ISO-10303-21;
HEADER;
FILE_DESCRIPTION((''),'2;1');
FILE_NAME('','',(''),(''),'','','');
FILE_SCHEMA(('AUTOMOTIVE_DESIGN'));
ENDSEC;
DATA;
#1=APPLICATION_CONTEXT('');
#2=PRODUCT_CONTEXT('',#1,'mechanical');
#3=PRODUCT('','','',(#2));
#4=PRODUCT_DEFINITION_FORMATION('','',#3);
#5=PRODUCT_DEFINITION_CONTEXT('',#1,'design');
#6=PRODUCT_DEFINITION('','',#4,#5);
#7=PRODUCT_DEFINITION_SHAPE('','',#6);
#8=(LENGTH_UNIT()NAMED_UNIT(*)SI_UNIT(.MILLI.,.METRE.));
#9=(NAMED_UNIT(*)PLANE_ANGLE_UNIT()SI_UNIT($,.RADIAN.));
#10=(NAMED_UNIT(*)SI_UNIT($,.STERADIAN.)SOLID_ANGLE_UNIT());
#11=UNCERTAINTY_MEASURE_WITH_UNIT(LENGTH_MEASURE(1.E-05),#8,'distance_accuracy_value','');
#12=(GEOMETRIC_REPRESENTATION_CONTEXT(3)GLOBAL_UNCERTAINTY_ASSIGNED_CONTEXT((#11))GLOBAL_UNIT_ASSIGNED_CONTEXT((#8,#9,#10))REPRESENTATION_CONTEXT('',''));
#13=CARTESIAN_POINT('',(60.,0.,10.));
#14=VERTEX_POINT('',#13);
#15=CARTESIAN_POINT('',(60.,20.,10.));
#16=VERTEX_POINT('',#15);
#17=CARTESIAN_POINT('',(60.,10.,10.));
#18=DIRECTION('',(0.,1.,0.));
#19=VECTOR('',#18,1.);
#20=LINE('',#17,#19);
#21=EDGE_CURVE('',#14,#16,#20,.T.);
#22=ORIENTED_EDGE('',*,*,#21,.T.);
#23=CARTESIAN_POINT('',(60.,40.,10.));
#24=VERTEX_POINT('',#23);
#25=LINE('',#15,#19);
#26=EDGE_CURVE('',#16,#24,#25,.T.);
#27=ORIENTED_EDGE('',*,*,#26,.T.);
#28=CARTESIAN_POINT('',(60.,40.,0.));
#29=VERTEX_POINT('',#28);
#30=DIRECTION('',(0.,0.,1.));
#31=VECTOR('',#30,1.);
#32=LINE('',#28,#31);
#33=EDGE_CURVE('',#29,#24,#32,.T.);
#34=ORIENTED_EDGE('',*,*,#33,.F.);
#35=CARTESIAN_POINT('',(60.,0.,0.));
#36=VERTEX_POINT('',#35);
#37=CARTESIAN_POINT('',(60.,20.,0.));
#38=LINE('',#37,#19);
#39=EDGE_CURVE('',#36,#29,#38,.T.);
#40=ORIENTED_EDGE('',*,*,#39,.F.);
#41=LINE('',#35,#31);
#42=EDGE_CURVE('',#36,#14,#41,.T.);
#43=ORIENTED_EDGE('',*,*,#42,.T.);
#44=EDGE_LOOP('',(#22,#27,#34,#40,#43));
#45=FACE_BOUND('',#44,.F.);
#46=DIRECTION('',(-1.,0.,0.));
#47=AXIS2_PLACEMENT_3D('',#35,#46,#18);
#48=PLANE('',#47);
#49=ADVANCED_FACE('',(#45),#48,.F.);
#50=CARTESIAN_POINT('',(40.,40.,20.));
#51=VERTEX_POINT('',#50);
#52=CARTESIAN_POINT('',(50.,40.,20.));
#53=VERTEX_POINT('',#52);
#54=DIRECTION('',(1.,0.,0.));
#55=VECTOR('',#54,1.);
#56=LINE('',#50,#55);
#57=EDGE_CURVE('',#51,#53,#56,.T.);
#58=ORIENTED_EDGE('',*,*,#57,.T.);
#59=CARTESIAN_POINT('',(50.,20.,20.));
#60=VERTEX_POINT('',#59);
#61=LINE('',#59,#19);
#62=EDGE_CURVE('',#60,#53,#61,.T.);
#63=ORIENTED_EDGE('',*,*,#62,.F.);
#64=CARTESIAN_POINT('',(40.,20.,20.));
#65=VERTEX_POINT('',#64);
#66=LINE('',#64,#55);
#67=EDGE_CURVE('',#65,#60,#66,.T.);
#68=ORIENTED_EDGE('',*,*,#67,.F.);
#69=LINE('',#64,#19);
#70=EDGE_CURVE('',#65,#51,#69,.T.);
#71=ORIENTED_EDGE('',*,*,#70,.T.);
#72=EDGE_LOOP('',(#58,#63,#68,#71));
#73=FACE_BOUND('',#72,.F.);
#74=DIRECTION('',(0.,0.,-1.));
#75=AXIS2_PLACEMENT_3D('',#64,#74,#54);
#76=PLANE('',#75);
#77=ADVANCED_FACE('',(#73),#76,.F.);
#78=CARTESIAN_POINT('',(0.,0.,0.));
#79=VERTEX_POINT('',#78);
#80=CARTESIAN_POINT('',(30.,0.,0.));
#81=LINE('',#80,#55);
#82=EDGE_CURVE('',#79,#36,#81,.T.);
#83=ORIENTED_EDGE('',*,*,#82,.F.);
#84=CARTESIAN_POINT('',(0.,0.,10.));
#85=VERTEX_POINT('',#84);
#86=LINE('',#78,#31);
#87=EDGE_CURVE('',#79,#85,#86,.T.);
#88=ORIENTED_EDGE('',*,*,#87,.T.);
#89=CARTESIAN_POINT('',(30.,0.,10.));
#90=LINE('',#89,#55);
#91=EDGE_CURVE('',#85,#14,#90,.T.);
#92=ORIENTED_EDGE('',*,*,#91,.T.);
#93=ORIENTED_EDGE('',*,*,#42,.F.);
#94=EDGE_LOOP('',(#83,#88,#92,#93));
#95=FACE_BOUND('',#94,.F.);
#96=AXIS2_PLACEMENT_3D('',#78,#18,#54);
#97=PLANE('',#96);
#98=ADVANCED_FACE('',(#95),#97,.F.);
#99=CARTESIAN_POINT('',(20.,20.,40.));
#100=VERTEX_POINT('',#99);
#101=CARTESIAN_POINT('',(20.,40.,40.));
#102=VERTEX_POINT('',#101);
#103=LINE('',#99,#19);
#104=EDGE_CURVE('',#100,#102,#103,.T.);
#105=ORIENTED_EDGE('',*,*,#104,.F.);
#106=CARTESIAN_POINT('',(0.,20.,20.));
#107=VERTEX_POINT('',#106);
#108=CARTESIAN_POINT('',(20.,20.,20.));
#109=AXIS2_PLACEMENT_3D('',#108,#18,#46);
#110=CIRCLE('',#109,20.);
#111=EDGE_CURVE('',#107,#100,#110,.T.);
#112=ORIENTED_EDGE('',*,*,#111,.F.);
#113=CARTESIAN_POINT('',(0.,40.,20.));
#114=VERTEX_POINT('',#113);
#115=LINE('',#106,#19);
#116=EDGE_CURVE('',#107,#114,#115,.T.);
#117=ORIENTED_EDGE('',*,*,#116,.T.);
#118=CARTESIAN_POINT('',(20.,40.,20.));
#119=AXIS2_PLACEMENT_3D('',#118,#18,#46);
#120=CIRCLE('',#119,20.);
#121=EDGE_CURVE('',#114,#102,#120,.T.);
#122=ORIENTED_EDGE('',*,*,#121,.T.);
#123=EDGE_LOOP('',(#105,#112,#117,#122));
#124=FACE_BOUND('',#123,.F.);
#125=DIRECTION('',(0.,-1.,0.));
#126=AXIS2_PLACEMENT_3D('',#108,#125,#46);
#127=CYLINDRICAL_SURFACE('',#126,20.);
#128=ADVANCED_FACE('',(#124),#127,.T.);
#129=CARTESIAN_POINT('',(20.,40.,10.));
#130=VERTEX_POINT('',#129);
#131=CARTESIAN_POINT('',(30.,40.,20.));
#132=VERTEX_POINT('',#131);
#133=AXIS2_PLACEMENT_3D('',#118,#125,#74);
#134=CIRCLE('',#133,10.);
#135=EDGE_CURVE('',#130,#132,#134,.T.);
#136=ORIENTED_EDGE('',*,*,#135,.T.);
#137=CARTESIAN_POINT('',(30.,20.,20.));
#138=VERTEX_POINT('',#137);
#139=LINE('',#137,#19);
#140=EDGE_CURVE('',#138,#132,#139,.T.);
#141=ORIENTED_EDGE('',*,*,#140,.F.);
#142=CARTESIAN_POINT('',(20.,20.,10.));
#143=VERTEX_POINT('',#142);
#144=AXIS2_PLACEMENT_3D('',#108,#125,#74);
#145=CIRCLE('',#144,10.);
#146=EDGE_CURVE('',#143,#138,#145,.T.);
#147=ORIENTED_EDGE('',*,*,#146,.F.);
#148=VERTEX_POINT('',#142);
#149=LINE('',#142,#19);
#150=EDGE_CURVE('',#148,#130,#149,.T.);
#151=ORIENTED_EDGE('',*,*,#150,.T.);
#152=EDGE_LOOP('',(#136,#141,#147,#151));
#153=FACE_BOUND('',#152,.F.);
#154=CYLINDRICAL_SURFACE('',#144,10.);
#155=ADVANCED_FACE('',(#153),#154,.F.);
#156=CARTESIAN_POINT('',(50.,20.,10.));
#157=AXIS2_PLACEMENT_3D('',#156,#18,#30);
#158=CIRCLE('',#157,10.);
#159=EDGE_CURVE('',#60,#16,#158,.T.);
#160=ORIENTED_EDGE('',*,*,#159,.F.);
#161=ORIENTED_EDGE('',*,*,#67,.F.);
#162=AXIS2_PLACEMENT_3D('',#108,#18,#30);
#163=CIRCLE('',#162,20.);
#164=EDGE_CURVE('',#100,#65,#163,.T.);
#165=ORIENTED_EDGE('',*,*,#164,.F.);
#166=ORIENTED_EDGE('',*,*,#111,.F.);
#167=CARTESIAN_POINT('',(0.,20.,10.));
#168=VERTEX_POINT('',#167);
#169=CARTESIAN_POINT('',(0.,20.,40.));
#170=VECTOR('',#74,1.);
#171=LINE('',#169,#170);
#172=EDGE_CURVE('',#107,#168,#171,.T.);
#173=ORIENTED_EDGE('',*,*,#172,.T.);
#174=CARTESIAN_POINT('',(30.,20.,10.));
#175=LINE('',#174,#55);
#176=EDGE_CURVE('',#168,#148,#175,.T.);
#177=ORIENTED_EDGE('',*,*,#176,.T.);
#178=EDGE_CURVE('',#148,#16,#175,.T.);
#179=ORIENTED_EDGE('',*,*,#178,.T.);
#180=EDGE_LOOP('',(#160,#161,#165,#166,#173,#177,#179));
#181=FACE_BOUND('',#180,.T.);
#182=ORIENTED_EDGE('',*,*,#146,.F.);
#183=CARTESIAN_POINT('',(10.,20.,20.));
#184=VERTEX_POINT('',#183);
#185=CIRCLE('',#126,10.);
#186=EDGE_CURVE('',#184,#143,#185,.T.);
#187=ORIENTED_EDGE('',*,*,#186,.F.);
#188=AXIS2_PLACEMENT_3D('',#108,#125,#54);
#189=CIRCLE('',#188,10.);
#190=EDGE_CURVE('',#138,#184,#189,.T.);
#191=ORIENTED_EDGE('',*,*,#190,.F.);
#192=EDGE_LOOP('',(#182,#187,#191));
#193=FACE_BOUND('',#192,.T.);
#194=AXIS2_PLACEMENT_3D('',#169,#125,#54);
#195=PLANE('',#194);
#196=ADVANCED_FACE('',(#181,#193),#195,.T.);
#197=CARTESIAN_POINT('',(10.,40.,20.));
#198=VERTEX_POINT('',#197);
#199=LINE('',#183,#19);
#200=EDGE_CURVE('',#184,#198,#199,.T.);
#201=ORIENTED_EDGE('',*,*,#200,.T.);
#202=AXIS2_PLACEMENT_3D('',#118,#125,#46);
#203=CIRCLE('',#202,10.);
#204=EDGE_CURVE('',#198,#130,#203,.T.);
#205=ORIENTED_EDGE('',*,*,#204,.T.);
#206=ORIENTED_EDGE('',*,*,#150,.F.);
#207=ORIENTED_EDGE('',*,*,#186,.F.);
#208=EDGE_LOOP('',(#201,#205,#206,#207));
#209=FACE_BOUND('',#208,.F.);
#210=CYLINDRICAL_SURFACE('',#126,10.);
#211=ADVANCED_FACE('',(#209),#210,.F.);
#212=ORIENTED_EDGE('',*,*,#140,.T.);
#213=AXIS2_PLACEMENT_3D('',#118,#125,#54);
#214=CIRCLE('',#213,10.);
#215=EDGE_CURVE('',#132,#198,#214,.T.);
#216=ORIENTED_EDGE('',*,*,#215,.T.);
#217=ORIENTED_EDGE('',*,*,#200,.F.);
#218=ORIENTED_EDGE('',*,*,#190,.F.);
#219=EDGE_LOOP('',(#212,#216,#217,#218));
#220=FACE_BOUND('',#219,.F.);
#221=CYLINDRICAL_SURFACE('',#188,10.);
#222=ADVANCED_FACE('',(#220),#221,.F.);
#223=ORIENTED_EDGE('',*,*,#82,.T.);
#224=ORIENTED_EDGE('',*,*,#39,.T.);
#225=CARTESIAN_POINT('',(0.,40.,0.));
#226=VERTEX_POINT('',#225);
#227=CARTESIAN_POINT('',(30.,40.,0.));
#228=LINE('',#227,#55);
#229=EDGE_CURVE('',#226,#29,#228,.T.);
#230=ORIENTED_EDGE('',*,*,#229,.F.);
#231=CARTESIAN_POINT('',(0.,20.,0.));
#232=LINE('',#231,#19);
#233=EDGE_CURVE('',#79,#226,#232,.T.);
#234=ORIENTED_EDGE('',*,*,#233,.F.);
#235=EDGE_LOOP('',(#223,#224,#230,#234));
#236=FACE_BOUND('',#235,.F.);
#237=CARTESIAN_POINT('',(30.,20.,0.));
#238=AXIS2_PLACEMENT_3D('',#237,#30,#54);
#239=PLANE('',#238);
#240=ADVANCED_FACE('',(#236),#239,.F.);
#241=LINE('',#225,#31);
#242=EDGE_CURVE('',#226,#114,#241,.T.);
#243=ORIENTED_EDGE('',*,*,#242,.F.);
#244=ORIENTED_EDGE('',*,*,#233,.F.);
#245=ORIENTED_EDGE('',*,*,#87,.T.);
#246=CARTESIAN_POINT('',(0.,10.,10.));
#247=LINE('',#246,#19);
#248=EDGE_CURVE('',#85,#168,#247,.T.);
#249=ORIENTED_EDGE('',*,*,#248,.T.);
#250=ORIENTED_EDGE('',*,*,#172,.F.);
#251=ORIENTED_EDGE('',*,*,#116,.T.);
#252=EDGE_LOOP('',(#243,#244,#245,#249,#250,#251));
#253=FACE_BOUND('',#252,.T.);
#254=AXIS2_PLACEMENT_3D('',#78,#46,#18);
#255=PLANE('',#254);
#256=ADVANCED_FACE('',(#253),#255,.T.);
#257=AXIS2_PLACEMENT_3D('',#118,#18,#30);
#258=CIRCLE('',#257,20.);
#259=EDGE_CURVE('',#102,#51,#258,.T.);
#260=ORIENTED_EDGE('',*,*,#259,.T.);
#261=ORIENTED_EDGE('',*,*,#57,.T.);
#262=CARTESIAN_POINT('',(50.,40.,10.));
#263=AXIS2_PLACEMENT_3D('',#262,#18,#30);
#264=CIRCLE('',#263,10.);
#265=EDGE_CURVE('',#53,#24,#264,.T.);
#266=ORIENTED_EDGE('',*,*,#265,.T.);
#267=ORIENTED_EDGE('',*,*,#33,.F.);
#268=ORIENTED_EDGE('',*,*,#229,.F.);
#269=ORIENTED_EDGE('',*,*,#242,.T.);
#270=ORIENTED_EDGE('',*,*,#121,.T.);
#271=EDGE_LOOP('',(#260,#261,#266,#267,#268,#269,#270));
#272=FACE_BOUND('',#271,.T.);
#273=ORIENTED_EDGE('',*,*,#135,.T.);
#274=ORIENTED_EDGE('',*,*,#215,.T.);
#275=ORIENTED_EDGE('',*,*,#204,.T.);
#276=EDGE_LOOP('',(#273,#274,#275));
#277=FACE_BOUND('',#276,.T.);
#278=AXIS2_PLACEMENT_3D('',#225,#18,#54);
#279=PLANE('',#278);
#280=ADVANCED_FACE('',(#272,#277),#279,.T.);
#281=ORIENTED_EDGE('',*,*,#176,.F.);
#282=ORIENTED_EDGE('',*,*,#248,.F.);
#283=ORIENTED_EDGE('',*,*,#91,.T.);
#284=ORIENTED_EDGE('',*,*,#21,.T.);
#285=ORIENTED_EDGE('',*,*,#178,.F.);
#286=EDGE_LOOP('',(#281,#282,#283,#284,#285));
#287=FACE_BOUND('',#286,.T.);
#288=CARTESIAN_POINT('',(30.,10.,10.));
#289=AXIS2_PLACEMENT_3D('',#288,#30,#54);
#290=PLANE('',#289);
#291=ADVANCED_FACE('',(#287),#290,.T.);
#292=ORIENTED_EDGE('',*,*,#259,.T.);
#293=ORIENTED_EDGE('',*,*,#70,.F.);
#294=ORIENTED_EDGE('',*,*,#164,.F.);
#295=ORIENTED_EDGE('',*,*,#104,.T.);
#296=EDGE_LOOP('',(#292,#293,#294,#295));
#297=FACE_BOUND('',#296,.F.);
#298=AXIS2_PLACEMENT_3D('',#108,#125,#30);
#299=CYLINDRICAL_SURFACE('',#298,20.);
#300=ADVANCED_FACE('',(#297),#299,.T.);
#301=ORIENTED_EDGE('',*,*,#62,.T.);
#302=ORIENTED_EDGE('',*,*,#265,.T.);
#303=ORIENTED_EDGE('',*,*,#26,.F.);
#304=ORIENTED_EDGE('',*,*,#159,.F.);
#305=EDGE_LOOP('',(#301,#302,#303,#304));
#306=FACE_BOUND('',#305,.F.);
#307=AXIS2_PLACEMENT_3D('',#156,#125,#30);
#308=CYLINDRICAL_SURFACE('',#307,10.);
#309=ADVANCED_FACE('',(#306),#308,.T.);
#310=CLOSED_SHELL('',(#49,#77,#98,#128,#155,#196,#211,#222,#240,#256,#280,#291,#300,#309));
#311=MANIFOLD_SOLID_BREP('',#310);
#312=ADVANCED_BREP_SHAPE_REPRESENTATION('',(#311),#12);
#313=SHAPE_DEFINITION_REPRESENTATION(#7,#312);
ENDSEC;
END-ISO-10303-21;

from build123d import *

# Parameters (mm, degrees)
F0_W     = 60
F0_H     = 40
F1_DEPTH = 40
F2_W     = 60
F2_H     = 20
F3_DEPTH = 30
F4_R     = 10
F5_DEPTH = 20
F7_DEPTH = 20
F9_DEPTH = 20


with BuildPart() as f1:
    # F0 (on Top) → F1 (new body)
    with BuildSketch(Plane.XY):
        with Locations((30, 20)):
            Rectangle(F0_W, F0_H)
    extrude(amount=F1_DEPTH)

    # F2 (on face) → F3 (cut)
    with BuildSketch(Plane.XY.offset(40)):
        with Locations((30, 10)):
            Rectangle(F2_W, F2_H)
    extrude(amount=-F3_DEPTH, mode=Mode.SUBTRACT)

    # F4 (on face) → F5 (join)
    with BuildSketch(Plane.XZ.offset(-20)):
        with Locations((17.3286311328, 20.5947589129)):
            Circle(F4_R)
    extrude(amount=-F5_DEPTH)

    # F6 (on face) → F7 (cut)
    with BuildSketch(Plane.XZ.offset(-20)):
        with BuildLine():
            ThreePointArc((30, 20), (20, 30), (10, 20))
            Line((10, 20), (20, 20))
            Line((20, 20), (30, 20))
        make_face()
        with BuildLine():
            ThreePointArc((10, 20), (12.9289321881, 12.9289321881), (20, 10))
            ThreePointArc((20, 10), (27.0710678119, 12.9289321881), (30, 20))
            Line((30, 20), (20, 20))
            Line((20, 20), (10, 20))
        make_face()
        with BuildLine():
            Line((0, 40), (0, 20))
            ThreePointArc((0, 20), (5.8578643763, 34.1421356237), (20, 40))
            Line((20, 40), (0, 40))
        make_face()
        with BuildLine():
            Line((60, 40), (20, 40))
            ThreePointArc((20, 40), (34.1421356237, 34.1421356237), (40, 20))
            Line((40, 20), (50, 20))
            Line((50, 20), (60, 20))
            Line((60, 20), (60, 40))
        make_face()
    extrude(amount=-F7_DEPTH, mode=Mode.SUBTRACT)

    # F8 (on face) → F9 (cut)
    with BuildSketch(Plane.XZ.offset(-20)):
        with BuildLine():
            ThreePointArc((50, 20), (57.0710678119, 17.0710678119), (60, 10))
            Line((60, 10), (60, 20))
            Line((60, 20), (50, 20))
        make_face()
    extrude(amount=-F9_DEPTH, mode=Mode.SUBTRACT)


solid = f1.part
